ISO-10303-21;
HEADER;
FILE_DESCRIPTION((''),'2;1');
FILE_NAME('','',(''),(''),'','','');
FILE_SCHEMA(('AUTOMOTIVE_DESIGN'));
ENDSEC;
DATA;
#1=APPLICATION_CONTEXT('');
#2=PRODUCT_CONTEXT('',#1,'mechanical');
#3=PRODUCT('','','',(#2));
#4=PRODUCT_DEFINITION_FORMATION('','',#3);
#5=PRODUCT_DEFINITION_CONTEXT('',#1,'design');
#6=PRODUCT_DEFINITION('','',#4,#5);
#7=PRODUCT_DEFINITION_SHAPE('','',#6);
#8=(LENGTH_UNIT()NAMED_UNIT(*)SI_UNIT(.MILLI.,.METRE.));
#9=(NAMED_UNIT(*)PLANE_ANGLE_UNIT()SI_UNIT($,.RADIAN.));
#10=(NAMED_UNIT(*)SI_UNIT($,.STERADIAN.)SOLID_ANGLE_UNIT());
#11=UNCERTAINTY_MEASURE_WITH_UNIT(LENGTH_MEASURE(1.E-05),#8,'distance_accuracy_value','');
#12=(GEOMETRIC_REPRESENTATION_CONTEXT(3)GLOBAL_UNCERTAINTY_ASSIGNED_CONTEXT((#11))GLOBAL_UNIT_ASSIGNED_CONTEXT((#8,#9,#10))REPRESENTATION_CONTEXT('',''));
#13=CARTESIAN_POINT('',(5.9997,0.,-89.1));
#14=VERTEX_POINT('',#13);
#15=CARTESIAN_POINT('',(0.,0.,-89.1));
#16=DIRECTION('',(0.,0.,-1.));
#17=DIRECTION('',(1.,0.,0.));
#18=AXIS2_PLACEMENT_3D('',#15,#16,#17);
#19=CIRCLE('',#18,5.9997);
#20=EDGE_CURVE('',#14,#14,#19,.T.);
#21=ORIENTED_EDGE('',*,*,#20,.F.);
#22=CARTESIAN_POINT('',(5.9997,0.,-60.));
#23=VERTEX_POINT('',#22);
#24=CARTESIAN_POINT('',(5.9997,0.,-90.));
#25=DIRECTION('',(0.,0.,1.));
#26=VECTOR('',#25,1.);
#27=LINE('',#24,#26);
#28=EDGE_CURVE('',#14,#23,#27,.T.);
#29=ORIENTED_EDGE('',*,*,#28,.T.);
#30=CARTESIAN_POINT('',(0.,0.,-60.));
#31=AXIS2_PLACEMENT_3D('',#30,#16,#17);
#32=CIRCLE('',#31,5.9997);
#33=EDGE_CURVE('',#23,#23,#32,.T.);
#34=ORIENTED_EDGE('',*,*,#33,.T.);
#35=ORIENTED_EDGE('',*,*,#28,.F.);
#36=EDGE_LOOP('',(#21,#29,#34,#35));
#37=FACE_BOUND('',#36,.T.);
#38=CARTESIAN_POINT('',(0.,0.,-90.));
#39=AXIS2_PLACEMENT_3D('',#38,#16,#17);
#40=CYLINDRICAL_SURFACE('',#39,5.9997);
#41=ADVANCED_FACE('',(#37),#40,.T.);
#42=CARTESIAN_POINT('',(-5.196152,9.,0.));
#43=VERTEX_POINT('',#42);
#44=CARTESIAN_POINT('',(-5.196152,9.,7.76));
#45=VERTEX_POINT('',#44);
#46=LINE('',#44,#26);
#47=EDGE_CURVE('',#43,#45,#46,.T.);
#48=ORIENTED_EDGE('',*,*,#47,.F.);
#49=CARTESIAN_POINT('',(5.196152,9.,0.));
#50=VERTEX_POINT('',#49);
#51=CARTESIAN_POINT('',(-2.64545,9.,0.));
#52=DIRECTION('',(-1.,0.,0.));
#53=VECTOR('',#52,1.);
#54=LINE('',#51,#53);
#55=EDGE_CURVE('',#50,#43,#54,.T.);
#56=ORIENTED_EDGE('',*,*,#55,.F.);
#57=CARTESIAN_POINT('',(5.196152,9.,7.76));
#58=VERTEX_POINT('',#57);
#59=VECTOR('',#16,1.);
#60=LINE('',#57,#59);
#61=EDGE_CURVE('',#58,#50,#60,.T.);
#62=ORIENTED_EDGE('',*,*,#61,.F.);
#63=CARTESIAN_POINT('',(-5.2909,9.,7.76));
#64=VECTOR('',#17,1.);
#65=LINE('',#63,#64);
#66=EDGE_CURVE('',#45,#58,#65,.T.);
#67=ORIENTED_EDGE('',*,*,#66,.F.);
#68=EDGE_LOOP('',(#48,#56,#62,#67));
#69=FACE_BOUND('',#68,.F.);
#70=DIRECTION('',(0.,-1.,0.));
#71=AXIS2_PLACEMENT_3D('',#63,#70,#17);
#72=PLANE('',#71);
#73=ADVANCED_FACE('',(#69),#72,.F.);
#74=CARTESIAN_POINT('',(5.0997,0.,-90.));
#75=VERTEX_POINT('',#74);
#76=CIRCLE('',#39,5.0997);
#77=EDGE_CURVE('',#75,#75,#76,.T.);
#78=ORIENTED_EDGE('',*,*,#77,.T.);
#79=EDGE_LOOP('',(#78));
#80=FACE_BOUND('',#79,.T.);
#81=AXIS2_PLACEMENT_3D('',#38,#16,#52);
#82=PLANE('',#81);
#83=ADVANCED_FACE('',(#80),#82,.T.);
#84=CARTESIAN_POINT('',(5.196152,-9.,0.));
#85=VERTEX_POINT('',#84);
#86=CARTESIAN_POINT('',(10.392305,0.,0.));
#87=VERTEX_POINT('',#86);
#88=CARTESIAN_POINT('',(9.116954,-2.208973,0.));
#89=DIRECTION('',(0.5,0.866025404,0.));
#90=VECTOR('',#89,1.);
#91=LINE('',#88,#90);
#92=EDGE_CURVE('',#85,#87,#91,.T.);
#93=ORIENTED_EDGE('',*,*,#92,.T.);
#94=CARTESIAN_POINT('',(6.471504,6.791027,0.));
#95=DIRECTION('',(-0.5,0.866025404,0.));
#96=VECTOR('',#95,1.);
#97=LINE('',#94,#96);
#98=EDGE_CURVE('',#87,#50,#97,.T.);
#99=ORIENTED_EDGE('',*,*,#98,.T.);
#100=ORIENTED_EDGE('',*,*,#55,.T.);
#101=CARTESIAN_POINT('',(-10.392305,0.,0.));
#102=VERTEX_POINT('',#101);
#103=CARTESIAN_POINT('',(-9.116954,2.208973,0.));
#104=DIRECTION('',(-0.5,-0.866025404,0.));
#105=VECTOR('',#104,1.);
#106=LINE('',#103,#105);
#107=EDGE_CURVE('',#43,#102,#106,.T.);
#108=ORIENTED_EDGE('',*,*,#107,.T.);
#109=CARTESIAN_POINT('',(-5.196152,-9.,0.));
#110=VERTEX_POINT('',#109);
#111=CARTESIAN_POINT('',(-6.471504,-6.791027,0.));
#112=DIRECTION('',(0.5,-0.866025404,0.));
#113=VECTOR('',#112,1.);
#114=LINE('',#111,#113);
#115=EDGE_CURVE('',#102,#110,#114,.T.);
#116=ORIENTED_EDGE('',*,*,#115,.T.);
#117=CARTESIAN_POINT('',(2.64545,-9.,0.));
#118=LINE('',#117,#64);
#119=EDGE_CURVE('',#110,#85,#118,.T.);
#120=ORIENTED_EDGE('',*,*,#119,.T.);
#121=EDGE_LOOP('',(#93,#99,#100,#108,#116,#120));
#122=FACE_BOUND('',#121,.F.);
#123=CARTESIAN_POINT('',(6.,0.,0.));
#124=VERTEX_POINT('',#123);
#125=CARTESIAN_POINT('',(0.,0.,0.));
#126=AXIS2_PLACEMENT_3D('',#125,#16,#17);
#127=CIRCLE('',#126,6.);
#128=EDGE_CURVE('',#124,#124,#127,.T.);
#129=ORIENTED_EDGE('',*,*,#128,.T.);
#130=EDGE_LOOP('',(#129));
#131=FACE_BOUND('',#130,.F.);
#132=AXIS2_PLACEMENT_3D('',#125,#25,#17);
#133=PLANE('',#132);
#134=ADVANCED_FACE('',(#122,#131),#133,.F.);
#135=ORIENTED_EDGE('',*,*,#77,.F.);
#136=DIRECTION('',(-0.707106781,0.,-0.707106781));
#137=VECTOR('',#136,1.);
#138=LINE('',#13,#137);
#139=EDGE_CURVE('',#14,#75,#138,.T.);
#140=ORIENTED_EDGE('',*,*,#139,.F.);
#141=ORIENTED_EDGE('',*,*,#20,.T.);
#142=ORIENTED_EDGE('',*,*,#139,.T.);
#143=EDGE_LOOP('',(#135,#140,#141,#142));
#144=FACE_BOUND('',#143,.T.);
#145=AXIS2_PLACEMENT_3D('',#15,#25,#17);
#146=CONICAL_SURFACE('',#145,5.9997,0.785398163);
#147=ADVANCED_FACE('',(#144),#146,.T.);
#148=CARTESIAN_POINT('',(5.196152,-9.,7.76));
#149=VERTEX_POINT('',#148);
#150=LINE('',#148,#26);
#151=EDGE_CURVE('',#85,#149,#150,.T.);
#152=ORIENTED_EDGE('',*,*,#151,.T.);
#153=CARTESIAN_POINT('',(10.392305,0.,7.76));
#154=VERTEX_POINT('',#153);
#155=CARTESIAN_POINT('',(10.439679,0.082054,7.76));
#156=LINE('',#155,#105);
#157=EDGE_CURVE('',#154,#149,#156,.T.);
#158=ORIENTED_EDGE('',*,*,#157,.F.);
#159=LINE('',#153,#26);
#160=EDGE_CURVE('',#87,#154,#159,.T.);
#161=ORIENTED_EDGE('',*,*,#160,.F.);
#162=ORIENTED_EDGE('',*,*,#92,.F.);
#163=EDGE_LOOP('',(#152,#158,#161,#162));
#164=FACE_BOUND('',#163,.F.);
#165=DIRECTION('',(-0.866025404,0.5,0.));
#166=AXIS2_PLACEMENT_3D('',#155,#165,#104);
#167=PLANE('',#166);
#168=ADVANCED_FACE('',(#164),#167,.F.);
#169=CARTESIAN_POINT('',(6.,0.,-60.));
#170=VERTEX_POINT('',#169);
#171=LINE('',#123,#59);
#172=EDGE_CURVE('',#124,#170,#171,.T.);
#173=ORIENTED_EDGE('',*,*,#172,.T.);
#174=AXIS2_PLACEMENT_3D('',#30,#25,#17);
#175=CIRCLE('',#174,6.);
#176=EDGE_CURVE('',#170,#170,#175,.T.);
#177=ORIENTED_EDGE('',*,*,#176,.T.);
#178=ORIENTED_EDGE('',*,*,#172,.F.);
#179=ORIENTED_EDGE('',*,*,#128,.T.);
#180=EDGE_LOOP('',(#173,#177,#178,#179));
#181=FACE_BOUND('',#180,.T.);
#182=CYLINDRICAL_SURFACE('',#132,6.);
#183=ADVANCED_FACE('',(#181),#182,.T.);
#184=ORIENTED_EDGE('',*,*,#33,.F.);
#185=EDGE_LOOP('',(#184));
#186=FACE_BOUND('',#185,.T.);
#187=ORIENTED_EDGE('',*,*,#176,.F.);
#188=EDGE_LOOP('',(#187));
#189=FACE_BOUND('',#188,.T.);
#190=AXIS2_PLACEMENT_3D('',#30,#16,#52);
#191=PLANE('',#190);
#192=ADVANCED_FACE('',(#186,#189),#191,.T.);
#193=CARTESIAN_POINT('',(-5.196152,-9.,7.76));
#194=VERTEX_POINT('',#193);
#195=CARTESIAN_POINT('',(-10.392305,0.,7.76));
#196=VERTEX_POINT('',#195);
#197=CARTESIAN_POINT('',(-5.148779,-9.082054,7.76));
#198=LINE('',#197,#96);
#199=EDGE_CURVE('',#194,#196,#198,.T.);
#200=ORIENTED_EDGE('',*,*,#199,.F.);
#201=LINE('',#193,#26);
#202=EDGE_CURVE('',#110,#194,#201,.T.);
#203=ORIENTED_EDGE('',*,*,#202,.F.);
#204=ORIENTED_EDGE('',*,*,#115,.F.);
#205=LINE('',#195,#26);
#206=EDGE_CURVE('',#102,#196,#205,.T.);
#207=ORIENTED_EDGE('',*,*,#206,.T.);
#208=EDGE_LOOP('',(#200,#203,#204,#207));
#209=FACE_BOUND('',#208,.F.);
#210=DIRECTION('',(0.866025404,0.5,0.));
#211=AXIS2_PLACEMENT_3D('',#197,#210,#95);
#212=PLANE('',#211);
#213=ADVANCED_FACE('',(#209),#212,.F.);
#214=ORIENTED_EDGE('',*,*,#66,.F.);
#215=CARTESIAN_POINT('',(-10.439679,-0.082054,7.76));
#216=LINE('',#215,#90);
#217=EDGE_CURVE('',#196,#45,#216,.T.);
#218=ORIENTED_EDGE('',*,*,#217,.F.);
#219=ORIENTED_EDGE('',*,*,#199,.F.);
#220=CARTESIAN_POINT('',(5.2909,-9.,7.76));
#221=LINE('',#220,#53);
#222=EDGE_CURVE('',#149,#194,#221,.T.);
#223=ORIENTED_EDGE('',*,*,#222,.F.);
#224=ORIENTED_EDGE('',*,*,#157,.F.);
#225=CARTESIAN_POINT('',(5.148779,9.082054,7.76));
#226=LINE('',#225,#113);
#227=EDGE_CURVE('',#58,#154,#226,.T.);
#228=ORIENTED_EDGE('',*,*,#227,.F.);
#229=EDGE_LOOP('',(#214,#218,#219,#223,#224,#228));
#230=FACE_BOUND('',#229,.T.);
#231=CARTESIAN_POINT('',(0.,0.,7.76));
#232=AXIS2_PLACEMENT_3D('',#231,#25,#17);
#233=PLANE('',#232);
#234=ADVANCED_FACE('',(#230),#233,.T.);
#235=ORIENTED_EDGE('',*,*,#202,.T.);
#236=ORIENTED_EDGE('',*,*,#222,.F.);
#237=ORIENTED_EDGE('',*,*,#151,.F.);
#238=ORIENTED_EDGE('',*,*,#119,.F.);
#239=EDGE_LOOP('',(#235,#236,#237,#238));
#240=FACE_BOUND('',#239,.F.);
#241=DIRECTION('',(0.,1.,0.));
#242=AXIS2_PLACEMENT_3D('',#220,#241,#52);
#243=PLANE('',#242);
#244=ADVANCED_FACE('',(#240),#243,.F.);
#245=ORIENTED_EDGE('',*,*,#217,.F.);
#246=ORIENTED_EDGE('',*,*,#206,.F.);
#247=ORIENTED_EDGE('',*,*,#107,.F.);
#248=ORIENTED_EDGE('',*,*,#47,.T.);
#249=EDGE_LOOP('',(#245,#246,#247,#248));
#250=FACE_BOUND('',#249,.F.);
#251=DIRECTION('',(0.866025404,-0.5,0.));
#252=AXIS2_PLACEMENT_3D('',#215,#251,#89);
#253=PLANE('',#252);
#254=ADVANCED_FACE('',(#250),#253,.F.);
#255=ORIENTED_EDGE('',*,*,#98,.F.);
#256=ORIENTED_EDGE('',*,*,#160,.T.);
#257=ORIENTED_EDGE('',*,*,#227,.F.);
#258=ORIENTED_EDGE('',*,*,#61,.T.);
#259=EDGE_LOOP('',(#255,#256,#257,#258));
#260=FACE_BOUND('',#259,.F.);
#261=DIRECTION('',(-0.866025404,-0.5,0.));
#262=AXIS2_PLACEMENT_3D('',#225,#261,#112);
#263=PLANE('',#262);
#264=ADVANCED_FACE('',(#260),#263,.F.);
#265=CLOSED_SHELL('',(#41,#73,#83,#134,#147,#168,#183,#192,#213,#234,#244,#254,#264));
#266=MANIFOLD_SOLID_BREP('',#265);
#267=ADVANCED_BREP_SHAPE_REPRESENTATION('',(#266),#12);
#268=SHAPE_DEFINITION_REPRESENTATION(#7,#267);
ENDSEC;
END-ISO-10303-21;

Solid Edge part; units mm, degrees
sketch "Sketch1" plane through (0, 0, 0) normal (0, 0, 1) x (1, 0, 0)
  circle A0 centre (0, 0) radius 10.44
  dimension "D1" = 20.88
extrude "Protrusion1" add sketch "Sketch1" along normal blind 7.76
sketch "Sketch2" plane through (0, 0, 0) normal (0, 0, -1) x (1, 0, 0)
  circle A0 centre (0, 0) radius 6
extrude "Protrusion2" add sketch "Sketch2" along normal blind 90
sketch "Sketch3" plane through (0, 0, -90) normal (0, 0, -1) x (1, 0, 0)
  circle A0 centre (0, 0) radius 5.9997
extrude "Cutout1" cut sketch "Sketch3" against normal blind 30 flip side to cut
chamfer "Chamfer_1" distance 0.9 angle 45 1 edges at (-5.9997, 0, -90)
sketch "Sketch4" plane through (0, 0, 7.76) normal (0, 0, 1) x (1, 0, 0)
  line L0 (-5.2909, 9) -> (5.2909, 9)
  dimension "D1" = 18
extrude "Cutout2" cut sketch "Sketch4" against normal up to next material side at (0, 9.05, 7.76)
pattern_circular "Pattern1" count 6 over 360 about axis through (0, 0, 7.76) along (0, 0, 1) of "Cutout2"
properties part number "24100960"
